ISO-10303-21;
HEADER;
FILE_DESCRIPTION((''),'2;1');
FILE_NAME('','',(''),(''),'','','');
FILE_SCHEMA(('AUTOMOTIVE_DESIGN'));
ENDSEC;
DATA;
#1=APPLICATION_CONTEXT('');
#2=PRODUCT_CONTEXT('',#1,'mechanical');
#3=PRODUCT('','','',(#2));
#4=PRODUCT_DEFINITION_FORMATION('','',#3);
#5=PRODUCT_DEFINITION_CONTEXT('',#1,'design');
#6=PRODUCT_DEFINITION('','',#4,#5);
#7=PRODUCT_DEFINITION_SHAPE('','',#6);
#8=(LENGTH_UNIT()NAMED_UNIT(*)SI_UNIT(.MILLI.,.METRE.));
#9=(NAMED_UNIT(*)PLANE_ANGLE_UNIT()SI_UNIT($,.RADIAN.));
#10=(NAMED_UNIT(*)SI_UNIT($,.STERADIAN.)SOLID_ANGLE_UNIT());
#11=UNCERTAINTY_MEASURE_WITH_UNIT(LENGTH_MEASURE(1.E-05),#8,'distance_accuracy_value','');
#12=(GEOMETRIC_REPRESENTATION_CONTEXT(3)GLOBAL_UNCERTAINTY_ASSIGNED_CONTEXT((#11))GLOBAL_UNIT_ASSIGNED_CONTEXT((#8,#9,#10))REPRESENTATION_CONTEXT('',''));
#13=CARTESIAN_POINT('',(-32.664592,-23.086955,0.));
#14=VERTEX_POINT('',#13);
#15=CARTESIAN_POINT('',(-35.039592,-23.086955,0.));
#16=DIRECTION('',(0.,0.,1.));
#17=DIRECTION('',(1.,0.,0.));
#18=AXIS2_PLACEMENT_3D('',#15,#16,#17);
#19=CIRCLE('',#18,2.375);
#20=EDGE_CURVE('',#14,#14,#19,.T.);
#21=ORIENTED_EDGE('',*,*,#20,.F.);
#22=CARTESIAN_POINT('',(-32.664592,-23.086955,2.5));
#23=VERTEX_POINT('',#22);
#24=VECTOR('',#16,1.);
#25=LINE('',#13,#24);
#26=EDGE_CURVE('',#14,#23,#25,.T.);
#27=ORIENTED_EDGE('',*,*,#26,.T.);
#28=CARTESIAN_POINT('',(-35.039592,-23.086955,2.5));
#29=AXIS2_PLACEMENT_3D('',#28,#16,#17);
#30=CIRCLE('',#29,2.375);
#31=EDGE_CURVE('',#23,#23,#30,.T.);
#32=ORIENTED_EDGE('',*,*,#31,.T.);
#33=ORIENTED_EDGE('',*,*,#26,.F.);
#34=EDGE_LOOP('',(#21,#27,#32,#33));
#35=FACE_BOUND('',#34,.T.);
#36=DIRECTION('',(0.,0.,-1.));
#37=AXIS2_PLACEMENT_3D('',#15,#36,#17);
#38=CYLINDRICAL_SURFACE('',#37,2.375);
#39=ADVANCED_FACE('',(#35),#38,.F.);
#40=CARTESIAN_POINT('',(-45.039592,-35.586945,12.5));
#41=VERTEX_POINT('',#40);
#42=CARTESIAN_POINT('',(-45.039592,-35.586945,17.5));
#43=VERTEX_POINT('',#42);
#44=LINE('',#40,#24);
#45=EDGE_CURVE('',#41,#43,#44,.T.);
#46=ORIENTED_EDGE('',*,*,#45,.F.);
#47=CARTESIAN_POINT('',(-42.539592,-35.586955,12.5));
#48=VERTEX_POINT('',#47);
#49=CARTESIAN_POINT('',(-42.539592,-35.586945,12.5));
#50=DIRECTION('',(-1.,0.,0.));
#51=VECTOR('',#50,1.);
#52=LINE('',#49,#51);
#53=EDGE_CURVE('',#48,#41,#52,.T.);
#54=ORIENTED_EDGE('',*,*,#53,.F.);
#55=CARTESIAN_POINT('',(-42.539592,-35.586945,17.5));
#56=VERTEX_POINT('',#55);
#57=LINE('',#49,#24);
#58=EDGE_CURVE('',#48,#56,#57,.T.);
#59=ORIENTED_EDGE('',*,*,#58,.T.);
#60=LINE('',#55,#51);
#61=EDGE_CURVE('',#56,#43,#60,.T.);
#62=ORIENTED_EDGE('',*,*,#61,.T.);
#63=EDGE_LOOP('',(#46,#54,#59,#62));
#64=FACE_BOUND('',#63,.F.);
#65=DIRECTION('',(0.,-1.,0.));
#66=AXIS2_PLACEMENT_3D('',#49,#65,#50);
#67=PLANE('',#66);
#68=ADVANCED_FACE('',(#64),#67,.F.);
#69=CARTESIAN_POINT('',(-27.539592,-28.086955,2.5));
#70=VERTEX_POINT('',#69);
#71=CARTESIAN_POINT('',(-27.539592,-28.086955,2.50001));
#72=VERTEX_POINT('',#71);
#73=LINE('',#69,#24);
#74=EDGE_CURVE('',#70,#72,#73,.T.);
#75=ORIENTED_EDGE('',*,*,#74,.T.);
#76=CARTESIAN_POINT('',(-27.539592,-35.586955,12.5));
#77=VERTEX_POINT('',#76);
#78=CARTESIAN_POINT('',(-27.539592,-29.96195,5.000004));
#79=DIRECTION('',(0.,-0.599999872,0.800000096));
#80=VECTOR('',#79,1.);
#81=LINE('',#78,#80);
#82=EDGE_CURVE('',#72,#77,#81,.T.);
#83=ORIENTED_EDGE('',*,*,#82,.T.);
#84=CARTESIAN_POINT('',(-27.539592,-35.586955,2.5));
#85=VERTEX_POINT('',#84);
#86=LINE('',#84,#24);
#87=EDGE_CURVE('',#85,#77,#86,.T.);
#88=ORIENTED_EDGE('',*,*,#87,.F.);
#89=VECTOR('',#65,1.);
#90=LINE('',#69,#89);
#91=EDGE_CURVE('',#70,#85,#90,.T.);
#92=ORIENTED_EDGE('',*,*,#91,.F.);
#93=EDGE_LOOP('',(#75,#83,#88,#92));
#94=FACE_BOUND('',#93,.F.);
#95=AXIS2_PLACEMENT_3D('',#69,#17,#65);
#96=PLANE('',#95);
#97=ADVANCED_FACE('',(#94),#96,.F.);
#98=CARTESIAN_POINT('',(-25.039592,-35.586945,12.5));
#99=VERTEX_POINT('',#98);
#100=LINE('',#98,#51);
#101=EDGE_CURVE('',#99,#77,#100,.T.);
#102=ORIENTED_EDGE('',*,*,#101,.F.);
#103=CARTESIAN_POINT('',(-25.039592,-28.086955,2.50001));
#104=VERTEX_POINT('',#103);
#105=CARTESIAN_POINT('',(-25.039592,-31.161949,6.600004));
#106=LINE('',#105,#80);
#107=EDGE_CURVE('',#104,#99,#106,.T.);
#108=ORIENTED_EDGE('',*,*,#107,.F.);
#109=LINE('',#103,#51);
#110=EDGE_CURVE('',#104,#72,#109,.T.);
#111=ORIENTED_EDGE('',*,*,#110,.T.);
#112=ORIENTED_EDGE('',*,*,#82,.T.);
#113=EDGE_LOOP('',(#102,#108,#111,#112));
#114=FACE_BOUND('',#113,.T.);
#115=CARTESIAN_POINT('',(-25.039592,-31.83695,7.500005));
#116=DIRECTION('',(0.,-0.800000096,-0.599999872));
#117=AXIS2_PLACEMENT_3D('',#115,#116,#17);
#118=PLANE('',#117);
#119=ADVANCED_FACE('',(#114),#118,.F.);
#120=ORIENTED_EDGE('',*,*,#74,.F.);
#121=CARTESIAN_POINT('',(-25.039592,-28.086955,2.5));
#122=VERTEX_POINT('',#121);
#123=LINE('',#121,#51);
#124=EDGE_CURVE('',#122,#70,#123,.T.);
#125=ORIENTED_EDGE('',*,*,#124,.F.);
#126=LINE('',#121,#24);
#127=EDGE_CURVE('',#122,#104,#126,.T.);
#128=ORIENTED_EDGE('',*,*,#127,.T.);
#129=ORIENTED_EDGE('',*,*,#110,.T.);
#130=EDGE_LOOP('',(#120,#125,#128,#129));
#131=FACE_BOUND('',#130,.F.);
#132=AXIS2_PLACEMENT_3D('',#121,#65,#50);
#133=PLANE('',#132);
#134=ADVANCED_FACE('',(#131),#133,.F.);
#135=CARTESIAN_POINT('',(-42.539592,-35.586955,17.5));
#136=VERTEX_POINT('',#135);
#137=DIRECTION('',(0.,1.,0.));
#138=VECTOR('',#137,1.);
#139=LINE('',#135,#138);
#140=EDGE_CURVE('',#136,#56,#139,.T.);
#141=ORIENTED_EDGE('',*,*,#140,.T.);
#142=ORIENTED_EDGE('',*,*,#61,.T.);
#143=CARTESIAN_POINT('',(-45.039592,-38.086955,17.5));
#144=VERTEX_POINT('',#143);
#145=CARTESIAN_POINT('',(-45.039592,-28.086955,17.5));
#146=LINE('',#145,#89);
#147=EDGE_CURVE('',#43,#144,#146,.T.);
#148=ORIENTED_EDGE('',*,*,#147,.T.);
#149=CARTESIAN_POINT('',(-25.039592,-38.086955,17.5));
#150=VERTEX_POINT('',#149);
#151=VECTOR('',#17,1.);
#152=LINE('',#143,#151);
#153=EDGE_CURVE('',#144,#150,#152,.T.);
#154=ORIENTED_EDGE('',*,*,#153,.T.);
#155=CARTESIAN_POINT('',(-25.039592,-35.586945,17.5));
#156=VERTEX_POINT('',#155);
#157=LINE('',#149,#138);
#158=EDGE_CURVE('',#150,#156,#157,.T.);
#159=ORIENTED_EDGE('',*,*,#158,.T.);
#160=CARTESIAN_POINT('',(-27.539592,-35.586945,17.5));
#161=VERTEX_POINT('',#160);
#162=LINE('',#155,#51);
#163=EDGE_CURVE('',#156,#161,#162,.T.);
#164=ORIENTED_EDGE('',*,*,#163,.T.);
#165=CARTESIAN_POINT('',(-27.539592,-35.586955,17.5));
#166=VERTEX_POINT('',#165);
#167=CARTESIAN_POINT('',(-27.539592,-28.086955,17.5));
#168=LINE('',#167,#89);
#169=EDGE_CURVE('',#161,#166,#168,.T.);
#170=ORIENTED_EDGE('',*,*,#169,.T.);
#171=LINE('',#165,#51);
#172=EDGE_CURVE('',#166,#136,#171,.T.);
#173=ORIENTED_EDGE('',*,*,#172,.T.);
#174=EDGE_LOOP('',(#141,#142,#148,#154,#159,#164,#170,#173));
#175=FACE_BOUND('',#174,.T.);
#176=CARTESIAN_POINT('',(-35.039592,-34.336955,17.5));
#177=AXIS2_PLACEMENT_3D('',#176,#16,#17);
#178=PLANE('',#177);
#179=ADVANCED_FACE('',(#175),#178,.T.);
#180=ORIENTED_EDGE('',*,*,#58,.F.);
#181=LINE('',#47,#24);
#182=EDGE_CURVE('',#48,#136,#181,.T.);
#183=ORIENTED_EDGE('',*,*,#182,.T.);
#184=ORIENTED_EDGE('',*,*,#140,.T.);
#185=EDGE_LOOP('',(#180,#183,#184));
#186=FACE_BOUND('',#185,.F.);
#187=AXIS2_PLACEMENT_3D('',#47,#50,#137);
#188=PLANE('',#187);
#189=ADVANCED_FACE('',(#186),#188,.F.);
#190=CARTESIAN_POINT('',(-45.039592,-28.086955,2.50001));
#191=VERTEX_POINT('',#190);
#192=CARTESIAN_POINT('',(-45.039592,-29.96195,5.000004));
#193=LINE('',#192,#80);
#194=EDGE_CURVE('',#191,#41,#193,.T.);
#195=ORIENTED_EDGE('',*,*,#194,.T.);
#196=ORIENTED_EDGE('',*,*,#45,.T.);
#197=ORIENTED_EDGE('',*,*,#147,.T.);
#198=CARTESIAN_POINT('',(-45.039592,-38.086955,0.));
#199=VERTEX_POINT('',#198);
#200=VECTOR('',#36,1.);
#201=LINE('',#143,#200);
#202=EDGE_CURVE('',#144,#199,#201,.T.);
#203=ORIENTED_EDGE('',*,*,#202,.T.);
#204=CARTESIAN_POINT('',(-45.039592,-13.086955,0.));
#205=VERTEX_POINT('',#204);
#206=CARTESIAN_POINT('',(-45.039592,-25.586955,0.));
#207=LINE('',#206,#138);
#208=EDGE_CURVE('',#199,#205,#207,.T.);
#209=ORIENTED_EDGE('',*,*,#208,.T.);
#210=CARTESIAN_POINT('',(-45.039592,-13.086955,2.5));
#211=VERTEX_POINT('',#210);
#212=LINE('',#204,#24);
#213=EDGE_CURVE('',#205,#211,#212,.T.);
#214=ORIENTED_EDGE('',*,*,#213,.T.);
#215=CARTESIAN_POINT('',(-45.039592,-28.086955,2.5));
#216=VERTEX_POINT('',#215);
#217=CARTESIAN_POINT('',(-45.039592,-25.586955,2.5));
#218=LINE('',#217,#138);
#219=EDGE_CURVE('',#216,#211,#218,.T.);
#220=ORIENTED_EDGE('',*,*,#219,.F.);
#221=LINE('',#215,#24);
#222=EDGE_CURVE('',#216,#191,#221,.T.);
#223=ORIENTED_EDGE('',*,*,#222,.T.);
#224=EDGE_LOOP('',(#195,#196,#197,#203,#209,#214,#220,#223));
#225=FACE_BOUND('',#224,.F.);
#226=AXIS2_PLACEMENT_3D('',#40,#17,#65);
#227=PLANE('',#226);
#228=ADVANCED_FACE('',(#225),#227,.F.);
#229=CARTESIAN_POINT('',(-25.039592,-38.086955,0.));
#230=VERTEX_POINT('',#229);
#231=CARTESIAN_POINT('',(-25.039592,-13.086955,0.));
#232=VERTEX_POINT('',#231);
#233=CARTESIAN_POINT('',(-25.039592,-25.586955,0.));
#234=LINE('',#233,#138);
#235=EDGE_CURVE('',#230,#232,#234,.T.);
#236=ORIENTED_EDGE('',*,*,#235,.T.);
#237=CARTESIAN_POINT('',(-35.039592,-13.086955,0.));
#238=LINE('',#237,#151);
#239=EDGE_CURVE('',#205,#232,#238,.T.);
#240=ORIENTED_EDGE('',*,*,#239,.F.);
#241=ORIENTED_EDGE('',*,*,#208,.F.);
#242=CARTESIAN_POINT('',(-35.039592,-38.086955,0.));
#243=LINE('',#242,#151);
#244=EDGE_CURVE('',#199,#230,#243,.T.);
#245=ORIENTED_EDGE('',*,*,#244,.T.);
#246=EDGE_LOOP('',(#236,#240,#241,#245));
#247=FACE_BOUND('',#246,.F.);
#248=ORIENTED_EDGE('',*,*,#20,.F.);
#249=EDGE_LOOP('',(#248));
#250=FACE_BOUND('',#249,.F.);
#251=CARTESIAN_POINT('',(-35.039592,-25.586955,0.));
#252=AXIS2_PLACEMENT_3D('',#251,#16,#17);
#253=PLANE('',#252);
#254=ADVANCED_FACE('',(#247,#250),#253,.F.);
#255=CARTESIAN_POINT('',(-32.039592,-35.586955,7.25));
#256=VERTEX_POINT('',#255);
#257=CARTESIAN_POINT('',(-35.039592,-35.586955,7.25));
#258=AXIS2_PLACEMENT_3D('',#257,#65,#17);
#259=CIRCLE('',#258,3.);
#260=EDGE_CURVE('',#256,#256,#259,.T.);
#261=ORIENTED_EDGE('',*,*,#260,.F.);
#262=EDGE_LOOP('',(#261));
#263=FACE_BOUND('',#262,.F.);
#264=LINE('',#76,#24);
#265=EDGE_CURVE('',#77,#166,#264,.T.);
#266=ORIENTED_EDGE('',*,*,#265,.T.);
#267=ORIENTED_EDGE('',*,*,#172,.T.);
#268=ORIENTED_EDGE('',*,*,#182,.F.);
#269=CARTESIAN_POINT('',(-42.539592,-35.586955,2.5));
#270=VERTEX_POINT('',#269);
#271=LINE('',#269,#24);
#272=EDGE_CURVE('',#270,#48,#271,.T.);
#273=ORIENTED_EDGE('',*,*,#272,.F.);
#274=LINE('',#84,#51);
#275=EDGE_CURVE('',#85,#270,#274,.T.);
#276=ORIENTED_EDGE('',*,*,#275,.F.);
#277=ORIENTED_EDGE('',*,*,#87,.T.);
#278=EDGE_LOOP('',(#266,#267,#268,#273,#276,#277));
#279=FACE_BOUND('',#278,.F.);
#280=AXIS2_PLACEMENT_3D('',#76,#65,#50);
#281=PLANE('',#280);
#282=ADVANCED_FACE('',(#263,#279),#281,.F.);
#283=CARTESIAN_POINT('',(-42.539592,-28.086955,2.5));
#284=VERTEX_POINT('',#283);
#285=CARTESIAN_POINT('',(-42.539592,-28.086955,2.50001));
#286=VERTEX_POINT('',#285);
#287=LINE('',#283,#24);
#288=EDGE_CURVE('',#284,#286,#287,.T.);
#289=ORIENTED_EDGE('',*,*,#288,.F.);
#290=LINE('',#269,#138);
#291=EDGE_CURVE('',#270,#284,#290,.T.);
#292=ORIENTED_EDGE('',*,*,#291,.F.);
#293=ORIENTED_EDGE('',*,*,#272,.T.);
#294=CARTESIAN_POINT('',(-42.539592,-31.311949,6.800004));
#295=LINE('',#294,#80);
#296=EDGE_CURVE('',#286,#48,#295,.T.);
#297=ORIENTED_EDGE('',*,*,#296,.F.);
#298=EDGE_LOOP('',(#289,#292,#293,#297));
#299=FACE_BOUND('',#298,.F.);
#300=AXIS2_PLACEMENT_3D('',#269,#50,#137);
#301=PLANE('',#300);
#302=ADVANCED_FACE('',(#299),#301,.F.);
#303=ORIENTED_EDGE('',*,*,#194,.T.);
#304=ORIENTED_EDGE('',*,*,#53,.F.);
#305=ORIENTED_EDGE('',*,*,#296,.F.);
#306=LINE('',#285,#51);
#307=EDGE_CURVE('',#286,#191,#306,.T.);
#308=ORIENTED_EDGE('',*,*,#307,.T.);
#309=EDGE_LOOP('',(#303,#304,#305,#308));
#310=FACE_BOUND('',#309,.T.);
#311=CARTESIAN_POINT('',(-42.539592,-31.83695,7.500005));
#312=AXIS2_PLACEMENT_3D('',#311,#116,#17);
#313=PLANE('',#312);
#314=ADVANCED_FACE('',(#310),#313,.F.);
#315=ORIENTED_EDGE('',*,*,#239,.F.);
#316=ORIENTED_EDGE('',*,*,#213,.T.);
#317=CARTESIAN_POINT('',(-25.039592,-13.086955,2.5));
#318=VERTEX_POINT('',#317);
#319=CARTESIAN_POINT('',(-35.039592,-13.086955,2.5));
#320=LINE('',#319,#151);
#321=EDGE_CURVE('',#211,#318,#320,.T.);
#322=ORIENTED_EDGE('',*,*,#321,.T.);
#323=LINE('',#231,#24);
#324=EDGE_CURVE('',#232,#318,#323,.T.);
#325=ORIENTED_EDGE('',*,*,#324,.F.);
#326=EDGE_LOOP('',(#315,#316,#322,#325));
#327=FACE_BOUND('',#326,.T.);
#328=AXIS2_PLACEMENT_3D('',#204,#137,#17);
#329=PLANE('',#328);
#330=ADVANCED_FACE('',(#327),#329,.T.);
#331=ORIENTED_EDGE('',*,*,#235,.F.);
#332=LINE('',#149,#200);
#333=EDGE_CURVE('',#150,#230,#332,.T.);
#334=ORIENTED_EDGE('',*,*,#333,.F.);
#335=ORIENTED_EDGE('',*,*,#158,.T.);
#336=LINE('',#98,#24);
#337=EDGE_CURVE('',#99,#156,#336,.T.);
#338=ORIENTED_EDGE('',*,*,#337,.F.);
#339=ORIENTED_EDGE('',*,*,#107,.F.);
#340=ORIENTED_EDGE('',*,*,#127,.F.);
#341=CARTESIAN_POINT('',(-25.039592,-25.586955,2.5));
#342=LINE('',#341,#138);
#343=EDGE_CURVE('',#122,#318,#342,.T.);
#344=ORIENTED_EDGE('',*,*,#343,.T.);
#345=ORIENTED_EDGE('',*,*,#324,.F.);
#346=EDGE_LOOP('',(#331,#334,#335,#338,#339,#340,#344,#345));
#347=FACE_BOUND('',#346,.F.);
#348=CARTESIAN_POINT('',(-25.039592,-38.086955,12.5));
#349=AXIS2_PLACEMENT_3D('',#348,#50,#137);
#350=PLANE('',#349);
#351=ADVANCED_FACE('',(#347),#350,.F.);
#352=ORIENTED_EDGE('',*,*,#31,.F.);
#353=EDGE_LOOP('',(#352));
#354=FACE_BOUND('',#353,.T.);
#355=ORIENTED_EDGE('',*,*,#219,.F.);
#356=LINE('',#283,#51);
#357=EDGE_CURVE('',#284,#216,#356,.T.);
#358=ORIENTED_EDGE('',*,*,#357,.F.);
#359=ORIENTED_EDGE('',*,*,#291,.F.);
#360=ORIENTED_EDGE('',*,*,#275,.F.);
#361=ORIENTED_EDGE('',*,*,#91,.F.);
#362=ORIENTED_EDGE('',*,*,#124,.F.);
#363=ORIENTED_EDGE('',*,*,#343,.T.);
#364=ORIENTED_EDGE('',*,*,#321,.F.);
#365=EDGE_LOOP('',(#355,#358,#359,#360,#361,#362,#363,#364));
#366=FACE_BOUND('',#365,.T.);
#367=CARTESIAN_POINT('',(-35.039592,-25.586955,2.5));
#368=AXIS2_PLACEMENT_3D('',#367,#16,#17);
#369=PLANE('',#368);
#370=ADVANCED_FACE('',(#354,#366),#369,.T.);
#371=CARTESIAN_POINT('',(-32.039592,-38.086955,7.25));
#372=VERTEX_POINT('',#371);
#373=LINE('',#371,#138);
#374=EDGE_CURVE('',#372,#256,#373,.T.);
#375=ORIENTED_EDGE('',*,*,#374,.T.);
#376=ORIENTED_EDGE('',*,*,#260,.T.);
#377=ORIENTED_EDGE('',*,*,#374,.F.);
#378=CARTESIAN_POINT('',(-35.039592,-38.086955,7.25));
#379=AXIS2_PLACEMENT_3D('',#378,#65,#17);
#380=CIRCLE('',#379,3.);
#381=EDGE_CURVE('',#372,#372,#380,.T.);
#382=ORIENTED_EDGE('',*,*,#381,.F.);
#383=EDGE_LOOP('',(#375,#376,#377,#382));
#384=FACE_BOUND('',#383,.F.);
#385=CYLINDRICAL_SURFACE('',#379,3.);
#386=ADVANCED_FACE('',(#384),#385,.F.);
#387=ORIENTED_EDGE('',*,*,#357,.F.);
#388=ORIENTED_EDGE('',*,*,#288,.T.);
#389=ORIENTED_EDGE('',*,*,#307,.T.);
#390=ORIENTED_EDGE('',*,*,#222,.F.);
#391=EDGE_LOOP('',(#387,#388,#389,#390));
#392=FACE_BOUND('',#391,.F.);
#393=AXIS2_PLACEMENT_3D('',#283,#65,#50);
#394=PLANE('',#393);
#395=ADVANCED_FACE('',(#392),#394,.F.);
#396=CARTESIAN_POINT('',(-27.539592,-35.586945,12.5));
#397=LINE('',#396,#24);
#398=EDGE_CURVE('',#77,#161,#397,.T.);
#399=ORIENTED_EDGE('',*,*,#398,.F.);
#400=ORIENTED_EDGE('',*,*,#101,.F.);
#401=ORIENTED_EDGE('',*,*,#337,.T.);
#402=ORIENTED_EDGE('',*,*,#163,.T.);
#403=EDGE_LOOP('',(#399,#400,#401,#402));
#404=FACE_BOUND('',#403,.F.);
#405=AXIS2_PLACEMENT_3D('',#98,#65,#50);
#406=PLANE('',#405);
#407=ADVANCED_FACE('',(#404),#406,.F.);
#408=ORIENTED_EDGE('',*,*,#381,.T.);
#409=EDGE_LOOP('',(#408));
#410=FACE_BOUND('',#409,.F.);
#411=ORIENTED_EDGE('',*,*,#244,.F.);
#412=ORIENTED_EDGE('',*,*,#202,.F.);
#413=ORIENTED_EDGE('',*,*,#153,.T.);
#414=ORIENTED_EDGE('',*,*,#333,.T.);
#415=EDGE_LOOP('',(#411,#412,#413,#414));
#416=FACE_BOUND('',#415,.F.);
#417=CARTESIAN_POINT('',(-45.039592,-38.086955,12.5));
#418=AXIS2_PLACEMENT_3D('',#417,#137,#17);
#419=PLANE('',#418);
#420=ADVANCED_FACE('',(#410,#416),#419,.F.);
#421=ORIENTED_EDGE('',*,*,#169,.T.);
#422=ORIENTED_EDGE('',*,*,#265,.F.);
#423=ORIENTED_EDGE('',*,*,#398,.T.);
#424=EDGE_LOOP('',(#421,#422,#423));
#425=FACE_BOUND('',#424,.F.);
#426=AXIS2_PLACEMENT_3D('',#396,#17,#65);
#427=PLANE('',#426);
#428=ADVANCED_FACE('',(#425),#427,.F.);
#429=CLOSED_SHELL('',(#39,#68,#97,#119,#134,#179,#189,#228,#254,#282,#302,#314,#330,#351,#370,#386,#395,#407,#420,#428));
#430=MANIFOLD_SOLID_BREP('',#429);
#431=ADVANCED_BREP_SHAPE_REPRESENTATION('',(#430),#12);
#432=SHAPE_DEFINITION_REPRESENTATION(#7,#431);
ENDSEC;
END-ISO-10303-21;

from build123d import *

# Parameters (mm, degrees)
F0_W       = 20
F0_H       = 25
F0_R       = 2.375
F1_DEPTH   = 2.5
F3_DEPTH   = 10
F4_SIZE2   = 7.49999
F4_SIZE    = 9.99999
F4_2_SIZE2 = 7.49999
F4_2_SIZE  = 9.99999
F5_DEPTH   = 5
F6_R       = 3
F7_DEPTH   = 2.5


# Not quite as in the source:
# - a fillet or chamfer is up to 0.001 mm smaller than in the source, because OpenCascade refuses the exact size


with BuildPart() as f1:
    # F0 (on Top) → F1 (new body)
    with BuildSketch(Plane.XY):
        with Locations((-35.0395915519, -25.5869545043)):
            Rectangle(F0_W, F0_H)
        with Locations((-35.0395915519, -23.0869545043)):
            Circle(F0_R, mode=Mode.SUBTRACT)
    extrude(amount=F1_DEPTH)

    # F2 (on face) → F3 (join)
    with BuildSketch(Plane.XY.offset(2.5)):
        Polygon((-42.5395915519, -28.0869545043), (-45.0395915519, -28.0869545043), (-45.0395915519, -38.0869545043), (-25.0395915519, -38.0869545043), (-25.0395915519, -28.0869545043), (-27.5395915519, -28.0869545043), (-27.5395915519, -35.5869545043), (-42.5395915519, -35.5869545043), align=None)
    extrude(amount=F3_DEPTH)

    # F4 (size 10 and 7.5 in the source; OpenCascade refuses exactly that, so slightly less here)
    f4_edges = [f1.edges().sort_by_distance(p)[0] for p in [
        (-43.789592, -28.086955, 12.5),
    ]]
    f4_side = f1.faces().sort_by_distance((-43.789592, -28.086955, 7.5))[0]
    chamfer(f4_edges, length=F4_SIZE, length2=F4_SIZE2, reference=f4_side)

    # F4#2 (size 10 and 7.5 in the source; OpenCascade refuses exactly that, so slightly less here)
    f4_2_edges = [f1.edges().sort_by_distance(p)[0] for p in [
        (-26.289592, -28.086955, 12.5),
    ]]
    f4_2_side = f1.faces().sort_by_distance((-26.289592, -28.086955, 7.5))[0]
    chamfer(f4_2_edges, length=F4_2_SIZE, length2=F4_2_SIZE2, reference=f4_2_side)

    # F5 (add): a face of the model
    f5_faces = [f1.faces().sort_by_distance(p)[0] for p in [
        (-35.0395915519, -36.8369532542, 12.5),
    ]]
    extrude(f5_faces, amount=F5_DEPTH)

    # F6 (on face) → F7 (cut)
    with BuildSketch(Plane.XZ.offset(38.0869545043)):
        with Locations((-35.0395915519, 7.25)):
            Circle(F6_R)
    extrude(amount=-F7_DEPTH, mode=Mode.SUBTRACT)


solid = f1.part
